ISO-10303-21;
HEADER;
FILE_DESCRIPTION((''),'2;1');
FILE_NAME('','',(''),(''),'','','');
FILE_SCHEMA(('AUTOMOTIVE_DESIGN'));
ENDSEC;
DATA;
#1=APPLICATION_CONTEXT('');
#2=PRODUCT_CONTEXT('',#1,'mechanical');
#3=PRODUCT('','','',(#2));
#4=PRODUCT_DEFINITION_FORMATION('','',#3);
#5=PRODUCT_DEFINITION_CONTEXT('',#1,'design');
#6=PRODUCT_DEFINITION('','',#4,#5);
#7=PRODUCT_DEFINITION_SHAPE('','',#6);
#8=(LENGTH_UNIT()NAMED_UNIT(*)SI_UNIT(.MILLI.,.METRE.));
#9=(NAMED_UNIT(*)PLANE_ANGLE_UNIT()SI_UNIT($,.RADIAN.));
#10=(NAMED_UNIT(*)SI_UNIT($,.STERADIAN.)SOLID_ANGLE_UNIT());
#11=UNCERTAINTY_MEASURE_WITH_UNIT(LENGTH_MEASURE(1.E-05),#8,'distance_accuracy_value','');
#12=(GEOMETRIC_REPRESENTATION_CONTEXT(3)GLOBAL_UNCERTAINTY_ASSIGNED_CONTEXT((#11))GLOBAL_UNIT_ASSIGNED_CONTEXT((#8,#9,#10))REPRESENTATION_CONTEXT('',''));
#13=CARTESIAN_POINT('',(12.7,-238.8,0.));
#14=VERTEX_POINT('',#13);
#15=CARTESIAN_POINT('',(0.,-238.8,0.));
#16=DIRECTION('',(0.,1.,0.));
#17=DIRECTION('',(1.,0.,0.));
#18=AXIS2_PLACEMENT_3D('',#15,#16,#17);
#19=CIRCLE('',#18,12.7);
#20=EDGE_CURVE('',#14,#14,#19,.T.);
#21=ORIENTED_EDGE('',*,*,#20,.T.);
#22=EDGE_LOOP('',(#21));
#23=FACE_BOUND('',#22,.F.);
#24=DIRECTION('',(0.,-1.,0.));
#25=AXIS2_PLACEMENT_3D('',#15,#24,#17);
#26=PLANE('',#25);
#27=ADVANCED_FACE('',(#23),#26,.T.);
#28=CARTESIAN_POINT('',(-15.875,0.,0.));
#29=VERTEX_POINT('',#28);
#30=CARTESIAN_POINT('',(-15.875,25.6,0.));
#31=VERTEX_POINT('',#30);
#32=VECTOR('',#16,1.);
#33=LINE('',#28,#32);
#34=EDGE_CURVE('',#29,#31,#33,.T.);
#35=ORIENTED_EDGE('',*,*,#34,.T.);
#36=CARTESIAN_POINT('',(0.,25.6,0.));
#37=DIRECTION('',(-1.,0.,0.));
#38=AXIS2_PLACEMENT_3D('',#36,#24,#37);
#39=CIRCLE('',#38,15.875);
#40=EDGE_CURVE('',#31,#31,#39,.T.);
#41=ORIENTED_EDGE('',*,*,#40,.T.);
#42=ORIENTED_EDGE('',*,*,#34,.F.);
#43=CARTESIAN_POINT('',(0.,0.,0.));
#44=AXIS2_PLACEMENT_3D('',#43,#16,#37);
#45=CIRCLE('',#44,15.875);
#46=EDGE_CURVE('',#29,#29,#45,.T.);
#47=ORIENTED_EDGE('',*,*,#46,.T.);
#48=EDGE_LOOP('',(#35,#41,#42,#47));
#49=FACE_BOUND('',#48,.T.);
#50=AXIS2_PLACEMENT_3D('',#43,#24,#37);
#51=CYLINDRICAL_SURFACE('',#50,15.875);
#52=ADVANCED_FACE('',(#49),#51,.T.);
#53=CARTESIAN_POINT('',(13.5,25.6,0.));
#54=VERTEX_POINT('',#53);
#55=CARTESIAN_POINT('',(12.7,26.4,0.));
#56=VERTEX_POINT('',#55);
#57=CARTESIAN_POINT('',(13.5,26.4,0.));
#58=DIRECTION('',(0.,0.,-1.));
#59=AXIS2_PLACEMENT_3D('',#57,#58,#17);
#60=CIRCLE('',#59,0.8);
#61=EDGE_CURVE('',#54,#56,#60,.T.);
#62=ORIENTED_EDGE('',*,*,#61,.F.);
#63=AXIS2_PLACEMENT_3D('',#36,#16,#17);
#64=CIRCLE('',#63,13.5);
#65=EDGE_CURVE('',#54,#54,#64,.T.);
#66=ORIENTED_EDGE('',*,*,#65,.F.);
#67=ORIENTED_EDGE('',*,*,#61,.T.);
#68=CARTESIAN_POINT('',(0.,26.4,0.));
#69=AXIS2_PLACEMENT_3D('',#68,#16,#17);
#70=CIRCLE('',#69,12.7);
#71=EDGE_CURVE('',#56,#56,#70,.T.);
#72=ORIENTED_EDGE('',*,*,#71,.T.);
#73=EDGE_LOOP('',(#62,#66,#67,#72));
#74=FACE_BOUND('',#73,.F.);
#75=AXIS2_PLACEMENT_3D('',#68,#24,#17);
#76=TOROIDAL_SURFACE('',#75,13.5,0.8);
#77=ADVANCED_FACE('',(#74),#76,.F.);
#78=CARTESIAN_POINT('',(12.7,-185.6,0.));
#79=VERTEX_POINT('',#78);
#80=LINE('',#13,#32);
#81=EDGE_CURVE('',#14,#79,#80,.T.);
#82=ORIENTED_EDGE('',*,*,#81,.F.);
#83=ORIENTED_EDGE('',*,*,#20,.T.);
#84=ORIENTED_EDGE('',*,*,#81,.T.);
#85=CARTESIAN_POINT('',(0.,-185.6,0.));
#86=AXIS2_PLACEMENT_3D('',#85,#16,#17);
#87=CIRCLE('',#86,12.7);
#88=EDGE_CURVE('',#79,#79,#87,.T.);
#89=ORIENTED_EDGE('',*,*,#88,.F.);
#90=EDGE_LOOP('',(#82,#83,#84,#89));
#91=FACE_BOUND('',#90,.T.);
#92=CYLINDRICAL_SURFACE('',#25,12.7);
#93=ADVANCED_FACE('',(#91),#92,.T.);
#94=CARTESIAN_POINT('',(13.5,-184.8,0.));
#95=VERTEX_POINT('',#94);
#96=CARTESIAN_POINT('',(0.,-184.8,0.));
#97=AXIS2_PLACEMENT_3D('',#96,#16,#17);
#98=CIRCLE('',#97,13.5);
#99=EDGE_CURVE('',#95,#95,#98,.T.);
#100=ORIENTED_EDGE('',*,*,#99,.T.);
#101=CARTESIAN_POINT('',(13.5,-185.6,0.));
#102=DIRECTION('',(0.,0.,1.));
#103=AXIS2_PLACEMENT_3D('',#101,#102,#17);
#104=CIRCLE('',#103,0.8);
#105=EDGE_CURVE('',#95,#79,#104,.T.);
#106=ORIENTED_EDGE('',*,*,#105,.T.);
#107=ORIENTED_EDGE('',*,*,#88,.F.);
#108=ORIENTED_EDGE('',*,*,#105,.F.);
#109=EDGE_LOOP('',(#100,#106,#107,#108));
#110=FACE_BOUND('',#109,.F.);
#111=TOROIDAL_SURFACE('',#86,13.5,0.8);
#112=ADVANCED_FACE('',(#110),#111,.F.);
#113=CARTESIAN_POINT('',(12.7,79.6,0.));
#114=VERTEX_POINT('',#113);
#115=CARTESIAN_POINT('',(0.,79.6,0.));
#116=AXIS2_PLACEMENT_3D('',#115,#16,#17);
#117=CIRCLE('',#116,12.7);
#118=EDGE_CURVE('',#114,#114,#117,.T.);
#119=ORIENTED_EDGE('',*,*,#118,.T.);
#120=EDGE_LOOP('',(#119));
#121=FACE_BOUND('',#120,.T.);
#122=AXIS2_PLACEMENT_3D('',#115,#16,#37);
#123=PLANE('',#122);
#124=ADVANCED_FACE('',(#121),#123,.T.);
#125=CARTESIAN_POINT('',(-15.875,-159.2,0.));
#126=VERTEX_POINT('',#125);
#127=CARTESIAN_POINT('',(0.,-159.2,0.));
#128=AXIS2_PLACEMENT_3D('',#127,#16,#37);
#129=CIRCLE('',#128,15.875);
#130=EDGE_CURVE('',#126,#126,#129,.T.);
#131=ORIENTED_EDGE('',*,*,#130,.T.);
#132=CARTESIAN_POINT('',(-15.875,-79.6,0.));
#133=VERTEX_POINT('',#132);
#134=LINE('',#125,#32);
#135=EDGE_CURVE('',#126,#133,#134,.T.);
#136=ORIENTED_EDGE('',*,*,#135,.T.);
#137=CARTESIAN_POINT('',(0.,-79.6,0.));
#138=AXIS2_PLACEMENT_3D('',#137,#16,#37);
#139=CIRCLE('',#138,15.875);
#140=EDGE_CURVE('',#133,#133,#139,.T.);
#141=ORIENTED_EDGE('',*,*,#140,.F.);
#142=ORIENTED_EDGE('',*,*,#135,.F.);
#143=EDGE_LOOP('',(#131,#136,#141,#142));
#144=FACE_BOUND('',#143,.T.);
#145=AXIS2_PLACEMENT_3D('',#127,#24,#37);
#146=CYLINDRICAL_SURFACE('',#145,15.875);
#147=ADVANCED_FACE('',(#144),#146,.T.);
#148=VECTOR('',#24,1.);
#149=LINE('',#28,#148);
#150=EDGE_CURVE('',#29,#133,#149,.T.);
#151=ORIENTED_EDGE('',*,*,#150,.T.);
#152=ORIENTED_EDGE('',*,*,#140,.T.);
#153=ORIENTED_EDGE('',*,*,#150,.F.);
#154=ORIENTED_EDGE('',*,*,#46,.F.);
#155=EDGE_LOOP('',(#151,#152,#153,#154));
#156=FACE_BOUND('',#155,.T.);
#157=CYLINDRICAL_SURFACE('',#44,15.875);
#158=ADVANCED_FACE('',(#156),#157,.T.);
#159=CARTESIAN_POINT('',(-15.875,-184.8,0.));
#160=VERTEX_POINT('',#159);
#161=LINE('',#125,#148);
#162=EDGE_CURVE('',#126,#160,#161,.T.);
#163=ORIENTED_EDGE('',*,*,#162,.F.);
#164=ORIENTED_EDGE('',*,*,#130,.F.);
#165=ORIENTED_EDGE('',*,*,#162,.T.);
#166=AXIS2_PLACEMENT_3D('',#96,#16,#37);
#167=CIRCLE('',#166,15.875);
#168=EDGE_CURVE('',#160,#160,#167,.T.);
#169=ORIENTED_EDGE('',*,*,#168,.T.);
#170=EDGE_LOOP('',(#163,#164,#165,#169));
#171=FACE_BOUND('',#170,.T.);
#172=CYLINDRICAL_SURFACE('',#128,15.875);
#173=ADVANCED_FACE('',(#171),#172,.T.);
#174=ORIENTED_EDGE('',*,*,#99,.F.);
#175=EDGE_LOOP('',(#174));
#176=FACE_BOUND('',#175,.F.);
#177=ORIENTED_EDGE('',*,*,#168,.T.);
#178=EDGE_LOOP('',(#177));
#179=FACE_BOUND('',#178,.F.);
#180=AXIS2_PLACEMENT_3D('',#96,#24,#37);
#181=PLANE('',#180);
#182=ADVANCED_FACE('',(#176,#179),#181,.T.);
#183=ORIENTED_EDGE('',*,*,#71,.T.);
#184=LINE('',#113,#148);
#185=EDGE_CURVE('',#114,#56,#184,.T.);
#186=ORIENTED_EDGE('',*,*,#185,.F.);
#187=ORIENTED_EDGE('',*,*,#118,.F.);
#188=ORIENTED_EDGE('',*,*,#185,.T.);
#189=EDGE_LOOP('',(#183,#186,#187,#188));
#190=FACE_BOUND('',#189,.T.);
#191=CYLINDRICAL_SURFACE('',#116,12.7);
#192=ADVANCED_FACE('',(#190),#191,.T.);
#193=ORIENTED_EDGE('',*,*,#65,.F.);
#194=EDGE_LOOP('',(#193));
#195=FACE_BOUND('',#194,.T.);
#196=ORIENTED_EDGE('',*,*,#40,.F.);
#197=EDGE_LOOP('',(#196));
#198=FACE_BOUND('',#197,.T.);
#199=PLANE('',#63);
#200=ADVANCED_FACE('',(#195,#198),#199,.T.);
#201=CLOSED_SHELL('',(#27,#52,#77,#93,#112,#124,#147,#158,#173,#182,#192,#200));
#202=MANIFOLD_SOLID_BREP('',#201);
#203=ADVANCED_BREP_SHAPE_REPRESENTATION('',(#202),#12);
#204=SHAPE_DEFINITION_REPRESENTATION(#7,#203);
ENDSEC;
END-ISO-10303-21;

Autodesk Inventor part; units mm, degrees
ref_plane "YZ Plane" through (0, 0, 0) normal (1, 0, 0) x (0, 1, 0)
ref_plane "XZ Plane" through (0, 0, 0) normal (0, 1, 0) x (-1, 0, 0)
ref_plane "XY Plane" through (0, 0, 0) normal (0, 0, 1) x (1, 0, 0)
sketch "Sketch1" plane through (0, 0, 0) normal (0, 1, 0) x (-1, 0, 0)
  circle A0 centre (0, 0) radius 15.875
  dimension "d7" = 31.75
extrude "Extrusion1" add sketch "Sketch1" along normal mid plane 159.2
sketch "Sketch2" plane through (0, 79.6, 0) normal (0, 1, 0) x (1, 0, 0)
  circle A0 centre (0, 0) radius 12.7
  circle A1 centre (0, 0) radius 15.875 projected
  circle A2 centre (0, 0) radius 15.875
  dimension "d6" = 25.4
extrude "Extrusion2" cut sketch "Sketch2" against normal blind 54
fillet "Fillet1" radius 0.8 1 edges at (-12.7, 25.6, 0)
mirror "Mirror2" about plane through (0, -79.6, 0) normal (0, -1, 0) of "Extrusion2", "Extrusion1", "Fillet1"
properties part number "Eje Biela"
